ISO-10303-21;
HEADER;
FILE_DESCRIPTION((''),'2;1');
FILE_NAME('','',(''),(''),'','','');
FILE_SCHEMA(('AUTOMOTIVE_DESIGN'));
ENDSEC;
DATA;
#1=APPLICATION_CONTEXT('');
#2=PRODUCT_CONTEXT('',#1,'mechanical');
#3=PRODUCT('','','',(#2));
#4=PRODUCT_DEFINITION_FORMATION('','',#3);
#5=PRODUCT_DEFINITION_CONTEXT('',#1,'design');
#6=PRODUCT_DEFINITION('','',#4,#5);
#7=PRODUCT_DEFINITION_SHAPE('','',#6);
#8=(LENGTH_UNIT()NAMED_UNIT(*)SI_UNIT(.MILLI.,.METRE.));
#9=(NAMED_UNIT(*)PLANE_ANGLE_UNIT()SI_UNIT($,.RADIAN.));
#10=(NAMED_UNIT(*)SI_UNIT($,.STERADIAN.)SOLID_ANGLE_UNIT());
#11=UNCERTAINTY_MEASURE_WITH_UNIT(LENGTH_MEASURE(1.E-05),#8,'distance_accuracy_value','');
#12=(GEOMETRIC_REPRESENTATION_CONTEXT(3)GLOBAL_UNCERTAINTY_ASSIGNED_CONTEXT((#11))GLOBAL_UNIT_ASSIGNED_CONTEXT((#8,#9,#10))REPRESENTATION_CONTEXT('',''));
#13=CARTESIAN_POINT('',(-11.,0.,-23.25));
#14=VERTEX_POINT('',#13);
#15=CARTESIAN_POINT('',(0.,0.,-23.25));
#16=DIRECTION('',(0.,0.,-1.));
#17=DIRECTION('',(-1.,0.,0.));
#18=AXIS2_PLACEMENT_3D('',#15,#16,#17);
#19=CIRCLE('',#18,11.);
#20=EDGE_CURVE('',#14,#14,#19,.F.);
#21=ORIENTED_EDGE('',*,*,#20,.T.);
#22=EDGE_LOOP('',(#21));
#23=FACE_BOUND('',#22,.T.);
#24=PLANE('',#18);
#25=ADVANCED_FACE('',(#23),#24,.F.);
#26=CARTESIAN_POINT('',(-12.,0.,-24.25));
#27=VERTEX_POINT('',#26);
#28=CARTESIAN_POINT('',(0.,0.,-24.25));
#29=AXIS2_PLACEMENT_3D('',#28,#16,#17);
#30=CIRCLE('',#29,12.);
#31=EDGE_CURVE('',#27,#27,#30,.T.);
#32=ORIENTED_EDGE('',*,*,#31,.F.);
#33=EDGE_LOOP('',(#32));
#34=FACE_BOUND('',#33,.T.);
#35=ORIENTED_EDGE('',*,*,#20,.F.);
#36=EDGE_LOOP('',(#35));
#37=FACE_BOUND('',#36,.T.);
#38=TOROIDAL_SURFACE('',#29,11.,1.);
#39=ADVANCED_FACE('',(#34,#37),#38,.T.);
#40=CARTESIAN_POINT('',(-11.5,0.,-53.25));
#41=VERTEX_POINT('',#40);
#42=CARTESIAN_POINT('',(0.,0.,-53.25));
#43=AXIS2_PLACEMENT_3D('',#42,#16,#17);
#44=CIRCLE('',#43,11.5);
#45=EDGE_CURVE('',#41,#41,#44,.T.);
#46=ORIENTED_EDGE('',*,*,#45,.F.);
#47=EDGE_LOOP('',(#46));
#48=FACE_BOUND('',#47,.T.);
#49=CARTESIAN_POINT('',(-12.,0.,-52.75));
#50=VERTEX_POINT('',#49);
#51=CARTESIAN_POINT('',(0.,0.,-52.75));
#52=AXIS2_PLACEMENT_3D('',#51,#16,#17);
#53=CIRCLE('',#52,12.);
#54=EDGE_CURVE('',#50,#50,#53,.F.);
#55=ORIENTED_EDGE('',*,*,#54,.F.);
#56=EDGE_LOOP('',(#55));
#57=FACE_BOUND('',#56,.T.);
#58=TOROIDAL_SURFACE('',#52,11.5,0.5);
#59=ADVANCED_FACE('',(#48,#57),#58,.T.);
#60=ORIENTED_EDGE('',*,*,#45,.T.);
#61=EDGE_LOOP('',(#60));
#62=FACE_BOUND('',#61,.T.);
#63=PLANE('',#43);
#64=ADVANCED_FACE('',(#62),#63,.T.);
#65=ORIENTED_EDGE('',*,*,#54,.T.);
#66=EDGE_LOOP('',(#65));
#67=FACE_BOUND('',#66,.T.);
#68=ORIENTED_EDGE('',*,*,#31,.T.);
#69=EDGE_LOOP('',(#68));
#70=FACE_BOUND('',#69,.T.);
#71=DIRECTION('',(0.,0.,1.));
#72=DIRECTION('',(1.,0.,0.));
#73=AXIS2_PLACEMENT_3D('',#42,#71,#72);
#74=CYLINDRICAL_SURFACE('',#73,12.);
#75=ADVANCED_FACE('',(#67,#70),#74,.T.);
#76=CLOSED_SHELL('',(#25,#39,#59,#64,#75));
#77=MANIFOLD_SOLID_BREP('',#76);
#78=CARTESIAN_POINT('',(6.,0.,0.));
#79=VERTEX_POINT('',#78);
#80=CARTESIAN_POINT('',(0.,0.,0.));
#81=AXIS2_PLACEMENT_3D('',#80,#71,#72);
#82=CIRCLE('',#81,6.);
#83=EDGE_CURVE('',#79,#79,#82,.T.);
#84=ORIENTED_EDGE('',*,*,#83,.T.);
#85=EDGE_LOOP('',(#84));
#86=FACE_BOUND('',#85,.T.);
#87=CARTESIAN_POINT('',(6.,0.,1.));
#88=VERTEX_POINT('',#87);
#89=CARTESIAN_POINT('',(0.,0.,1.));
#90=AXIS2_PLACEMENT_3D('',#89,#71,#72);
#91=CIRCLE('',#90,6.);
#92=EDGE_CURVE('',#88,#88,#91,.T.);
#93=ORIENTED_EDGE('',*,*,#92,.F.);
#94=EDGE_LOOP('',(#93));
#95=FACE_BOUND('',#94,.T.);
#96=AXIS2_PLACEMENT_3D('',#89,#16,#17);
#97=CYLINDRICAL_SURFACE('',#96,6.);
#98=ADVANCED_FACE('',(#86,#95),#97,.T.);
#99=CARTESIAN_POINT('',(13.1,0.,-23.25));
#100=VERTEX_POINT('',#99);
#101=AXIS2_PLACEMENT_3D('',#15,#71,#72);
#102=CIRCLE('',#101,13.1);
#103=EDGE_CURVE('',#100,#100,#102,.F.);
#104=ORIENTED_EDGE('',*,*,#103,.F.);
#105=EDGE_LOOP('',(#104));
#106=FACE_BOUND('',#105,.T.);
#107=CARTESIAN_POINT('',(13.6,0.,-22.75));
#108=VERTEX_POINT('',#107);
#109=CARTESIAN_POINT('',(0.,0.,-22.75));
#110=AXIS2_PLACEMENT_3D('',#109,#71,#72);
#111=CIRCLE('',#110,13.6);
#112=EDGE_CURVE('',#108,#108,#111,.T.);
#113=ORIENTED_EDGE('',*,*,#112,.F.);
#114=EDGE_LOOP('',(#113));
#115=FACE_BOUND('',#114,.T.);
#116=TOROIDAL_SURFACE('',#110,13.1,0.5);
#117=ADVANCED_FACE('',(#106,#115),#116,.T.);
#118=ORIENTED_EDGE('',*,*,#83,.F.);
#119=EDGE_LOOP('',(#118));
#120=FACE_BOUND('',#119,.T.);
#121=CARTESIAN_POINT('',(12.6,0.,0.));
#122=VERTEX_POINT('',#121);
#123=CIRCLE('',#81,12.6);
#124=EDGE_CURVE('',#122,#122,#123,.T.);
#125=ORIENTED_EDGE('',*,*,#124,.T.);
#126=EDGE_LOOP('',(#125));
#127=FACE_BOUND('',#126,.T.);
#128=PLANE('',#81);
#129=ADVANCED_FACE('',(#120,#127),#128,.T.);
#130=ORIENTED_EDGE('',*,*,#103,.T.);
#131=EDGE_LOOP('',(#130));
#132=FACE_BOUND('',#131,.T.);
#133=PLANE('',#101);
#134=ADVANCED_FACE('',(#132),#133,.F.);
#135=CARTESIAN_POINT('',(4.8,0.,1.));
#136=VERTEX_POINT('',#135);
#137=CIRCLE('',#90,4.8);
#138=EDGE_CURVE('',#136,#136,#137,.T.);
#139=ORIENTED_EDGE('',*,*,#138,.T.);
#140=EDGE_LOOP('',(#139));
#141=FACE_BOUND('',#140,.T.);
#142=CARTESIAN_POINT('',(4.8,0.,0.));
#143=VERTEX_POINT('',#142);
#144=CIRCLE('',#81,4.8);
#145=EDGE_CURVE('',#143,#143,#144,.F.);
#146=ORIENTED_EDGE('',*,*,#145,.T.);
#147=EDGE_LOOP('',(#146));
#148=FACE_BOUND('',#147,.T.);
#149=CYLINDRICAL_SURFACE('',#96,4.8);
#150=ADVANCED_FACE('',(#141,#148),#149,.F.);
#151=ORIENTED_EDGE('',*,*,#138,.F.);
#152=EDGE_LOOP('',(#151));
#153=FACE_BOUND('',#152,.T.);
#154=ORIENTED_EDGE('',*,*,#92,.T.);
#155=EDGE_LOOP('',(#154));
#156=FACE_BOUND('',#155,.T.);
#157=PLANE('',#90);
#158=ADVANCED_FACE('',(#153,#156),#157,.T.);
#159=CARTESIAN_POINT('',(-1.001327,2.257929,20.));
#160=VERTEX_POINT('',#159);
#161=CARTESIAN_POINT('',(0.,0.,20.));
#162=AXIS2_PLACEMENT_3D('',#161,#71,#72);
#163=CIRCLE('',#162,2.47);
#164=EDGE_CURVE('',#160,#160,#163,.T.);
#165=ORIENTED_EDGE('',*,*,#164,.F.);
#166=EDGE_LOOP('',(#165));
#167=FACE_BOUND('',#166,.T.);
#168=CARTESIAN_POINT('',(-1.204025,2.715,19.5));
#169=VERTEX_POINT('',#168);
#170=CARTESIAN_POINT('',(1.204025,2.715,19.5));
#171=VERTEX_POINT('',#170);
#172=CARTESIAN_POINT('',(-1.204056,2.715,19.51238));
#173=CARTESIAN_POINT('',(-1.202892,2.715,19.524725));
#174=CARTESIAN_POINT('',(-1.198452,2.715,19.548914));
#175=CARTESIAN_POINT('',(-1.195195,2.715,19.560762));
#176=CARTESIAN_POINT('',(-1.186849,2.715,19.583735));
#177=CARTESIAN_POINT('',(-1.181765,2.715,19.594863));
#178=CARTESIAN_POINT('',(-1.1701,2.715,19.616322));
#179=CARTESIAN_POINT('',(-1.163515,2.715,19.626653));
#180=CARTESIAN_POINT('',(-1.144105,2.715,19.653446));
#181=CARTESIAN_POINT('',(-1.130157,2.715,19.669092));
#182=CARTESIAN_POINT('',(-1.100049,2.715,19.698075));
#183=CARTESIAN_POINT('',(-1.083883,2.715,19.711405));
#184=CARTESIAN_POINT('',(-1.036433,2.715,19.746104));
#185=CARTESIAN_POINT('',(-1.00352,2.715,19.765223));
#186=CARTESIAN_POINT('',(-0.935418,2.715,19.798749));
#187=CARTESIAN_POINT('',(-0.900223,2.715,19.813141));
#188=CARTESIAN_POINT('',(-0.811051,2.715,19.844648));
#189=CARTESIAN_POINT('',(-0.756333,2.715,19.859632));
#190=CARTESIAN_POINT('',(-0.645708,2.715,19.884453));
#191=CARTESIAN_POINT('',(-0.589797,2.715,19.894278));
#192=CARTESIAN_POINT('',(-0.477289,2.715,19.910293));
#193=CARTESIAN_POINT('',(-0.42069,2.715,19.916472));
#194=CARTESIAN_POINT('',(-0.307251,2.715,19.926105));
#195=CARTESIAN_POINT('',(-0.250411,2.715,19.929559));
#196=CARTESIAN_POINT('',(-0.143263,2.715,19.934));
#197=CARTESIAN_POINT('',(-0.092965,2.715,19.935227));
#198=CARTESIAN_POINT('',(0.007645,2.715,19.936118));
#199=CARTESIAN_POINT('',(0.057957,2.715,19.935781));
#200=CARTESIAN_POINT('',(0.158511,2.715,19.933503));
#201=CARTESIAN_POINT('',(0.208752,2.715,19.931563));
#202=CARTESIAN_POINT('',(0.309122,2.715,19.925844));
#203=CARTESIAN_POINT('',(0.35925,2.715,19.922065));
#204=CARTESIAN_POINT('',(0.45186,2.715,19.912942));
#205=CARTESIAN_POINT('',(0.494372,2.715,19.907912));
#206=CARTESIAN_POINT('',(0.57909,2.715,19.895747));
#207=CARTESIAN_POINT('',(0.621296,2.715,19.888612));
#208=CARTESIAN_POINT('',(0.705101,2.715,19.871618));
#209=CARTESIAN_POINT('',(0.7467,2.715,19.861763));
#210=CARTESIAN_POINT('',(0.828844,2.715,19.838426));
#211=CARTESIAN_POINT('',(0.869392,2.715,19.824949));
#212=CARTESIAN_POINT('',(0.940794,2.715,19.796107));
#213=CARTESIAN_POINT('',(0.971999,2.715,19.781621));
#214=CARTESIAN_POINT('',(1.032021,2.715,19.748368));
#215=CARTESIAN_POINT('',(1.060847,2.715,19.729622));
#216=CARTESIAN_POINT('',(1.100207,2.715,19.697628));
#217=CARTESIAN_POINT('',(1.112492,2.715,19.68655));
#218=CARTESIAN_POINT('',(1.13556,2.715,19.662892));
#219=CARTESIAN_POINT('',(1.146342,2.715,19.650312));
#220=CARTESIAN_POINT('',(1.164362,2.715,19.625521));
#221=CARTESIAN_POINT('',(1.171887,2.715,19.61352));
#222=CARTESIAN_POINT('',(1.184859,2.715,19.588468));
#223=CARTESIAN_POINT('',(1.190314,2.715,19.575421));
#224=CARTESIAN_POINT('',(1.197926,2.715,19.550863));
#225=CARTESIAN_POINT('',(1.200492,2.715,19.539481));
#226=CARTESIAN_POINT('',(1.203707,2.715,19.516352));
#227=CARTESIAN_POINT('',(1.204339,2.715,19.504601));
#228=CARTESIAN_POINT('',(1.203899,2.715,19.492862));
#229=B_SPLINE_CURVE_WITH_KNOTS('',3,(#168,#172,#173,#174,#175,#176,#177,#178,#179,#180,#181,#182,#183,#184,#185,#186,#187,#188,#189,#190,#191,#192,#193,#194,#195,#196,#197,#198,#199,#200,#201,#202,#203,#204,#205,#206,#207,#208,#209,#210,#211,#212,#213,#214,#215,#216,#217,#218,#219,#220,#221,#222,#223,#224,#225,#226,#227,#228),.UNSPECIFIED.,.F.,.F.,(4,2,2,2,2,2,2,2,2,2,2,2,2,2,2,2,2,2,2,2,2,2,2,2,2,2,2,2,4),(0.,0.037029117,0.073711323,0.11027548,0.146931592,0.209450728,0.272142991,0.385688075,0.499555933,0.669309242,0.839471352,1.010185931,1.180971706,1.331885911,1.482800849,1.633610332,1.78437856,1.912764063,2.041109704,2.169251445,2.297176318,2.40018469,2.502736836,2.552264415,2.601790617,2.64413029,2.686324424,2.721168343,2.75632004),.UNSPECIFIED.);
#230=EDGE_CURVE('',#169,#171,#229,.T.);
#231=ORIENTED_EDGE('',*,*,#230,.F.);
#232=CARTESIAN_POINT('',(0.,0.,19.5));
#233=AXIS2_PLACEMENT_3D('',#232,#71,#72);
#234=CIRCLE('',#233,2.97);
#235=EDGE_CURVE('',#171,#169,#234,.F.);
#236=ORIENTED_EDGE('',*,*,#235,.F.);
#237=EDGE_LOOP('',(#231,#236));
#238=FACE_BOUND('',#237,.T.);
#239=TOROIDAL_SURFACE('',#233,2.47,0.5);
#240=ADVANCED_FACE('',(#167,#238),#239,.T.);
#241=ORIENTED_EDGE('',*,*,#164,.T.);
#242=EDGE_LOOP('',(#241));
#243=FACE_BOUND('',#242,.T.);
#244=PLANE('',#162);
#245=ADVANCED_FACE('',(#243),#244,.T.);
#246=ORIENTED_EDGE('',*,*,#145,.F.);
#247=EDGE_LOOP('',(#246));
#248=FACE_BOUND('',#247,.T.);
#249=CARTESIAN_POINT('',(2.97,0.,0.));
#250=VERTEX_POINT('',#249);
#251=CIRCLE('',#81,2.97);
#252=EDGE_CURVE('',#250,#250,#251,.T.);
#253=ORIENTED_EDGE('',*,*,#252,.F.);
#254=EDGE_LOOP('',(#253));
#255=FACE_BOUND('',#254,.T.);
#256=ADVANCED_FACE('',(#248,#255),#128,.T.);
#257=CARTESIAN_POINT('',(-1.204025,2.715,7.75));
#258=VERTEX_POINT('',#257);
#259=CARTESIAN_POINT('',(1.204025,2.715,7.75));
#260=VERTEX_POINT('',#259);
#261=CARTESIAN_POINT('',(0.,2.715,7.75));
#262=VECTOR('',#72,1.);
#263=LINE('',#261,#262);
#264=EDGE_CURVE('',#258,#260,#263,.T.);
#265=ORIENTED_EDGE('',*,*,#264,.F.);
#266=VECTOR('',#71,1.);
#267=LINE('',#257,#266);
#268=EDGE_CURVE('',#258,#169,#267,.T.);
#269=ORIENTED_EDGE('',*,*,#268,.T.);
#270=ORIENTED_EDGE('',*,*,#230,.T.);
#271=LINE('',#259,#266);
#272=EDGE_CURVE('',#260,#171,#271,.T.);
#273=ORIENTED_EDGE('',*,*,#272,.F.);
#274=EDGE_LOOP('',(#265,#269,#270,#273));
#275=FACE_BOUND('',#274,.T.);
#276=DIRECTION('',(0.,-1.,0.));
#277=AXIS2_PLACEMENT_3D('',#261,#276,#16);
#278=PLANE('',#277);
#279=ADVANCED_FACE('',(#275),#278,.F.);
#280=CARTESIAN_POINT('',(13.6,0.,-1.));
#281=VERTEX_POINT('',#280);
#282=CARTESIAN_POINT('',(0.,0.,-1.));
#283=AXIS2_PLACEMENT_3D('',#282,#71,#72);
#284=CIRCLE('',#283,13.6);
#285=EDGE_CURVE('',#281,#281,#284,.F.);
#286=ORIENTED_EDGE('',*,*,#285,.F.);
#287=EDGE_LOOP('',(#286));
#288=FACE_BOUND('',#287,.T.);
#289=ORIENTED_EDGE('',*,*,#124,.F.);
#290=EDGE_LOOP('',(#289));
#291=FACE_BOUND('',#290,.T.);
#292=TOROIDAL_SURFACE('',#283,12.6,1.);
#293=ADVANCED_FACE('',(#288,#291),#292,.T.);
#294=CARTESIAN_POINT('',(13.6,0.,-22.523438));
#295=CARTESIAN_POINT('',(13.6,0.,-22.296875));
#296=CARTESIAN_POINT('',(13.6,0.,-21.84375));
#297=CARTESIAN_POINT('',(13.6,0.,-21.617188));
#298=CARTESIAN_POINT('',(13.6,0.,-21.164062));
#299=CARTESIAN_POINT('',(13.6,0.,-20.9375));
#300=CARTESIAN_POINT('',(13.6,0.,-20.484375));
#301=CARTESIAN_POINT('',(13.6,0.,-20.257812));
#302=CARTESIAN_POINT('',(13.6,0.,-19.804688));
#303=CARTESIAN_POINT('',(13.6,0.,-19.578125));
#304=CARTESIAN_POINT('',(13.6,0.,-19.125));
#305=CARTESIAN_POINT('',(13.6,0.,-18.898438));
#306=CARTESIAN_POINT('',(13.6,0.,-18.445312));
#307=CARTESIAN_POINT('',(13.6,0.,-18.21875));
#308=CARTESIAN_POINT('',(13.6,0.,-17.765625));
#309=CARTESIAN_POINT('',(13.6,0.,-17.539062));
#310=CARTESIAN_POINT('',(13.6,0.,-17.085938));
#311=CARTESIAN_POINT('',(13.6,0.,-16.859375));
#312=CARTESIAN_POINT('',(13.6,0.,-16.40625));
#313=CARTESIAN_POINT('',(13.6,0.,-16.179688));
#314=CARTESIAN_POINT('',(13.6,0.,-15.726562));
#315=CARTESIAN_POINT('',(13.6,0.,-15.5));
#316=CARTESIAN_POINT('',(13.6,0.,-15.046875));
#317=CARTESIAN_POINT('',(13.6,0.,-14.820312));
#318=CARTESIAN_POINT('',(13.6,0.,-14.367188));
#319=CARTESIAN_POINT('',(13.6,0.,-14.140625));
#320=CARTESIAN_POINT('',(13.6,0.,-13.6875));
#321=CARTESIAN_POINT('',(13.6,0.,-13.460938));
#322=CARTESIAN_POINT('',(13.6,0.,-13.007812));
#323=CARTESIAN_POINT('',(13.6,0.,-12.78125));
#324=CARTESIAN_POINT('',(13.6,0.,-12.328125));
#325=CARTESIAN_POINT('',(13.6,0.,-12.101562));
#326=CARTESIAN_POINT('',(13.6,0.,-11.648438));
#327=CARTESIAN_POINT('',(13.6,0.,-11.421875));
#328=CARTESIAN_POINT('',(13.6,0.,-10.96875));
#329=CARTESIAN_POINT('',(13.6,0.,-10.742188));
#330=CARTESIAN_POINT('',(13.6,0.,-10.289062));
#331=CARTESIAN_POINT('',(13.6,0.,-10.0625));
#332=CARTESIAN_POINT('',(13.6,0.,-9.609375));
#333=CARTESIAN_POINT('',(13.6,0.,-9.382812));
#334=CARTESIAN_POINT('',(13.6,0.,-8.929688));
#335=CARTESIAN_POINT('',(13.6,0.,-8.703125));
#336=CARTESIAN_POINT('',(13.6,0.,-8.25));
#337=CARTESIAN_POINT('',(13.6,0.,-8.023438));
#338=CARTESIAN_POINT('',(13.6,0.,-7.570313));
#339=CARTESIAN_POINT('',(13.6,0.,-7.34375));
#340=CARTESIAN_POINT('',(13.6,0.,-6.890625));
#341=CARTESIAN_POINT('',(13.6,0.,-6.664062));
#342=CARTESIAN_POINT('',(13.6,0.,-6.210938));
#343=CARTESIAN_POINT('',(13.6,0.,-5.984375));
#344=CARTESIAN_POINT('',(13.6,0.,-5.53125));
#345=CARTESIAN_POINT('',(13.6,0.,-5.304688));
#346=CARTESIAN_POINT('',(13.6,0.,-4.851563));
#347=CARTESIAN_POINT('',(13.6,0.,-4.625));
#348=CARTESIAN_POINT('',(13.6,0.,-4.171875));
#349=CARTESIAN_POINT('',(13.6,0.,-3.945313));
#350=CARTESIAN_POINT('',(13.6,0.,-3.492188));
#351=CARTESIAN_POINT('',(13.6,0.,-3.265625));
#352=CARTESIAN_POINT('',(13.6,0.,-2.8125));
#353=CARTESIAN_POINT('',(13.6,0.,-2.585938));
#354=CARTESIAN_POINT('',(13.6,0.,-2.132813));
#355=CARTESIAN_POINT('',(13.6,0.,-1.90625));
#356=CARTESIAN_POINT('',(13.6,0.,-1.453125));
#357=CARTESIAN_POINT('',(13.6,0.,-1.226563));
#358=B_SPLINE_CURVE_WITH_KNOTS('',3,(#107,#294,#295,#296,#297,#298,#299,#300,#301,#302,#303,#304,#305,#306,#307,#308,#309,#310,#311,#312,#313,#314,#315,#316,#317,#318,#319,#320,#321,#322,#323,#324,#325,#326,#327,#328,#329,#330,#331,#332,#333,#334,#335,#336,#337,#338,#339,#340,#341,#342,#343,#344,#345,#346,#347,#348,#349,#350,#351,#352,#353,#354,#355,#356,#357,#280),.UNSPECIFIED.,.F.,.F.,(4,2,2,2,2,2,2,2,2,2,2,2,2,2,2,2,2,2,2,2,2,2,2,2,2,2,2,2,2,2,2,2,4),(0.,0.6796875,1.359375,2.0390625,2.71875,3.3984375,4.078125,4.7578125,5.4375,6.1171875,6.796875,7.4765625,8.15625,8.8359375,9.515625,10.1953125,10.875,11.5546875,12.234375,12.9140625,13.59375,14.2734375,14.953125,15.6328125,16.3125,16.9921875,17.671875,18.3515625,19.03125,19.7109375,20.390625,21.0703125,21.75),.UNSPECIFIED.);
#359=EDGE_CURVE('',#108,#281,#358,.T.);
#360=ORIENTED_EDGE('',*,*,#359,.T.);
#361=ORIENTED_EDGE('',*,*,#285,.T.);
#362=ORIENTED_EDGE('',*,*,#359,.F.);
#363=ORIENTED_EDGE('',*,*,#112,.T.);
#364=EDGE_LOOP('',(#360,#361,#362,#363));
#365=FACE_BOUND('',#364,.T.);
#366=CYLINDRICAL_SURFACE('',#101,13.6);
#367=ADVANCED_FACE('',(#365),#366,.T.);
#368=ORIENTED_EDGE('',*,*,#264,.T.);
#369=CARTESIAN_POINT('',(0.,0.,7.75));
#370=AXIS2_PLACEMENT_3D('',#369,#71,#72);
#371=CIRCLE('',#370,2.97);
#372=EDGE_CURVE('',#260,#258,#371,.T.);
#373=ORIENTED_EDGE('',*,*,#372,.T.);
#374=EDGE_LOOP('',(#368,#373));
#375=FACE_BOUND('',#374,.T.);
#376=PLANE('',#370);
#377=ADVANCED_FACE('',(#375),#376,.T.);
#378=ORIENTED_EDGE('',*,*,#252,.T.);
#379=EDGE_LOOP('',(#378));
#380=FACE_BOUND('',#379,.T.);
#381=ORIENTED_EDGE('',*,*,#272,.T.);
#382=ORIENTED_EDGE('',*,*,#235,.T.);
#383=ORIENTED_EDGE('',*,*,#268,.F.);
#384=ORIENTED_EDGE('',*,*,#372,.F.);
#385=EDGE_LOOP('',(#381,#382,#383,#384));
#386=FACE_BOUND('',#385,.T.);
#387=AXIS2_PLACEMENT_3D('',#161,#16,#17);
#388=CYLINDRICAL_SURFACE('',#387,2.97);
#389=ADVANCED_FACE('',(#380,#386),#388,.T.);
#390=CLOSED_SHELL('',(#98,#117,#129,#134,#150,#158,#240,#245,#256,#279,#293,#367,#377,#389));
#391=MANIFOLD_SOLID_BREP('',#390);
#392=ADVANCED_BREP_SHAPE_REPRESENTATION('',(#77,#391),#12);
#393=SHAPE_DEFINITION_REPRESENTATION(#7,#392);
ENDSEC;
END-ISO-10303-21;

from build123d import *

# Parameters (mm, degrees)
SKETCH1_R               = 13.6
BOSS_EXTRUDE1_DEPTH     = 23.25
SKETCH2_R               = 12
BOSS_EXTRUDE2_DEPTH     = 30
FILLET1_R               = 1
FILLET2_R               = 1
SKETCH3_R               = 6
SKETCH3_R_2             = 4.8
BOSS_EXTRUDE3_DEPTH     = 1
SKETCH4_R               = 2.97
BOSS_EXTRUDE4_DEPTH     = 20
CUT_EXTRUDE1_DEPTH      = 76.7329684
CUT_EXTRUDE1_DEPTH_BACK = 12.25
FILLET3_R               = 0.5
FILLET4_R               = 0.5
FILLET5_R               = 0.5


with BuildPart() as part:
    # Sketch1 → Boss-Extrude1 (new body)
    with BuildSketch(Plane.XY):
        Circle(SKETCH1_R)
    extrude(amount=-BOSS_EXTRUDE1_DEPTH)

    # Fillet2
    fillet2_edges = [part.edges().sort_by_distance(p)[0] for p in [
        (-13.6, 0, 0),
    ]]
    fillet(fillet2_edges, radius=FILLET2_R)

    # Sketch3 → Boss-Extrude3 (add)
    with BuildSketch(Plane.XY):
        Circle(SKETCH3_R)
        Circle(SKETCH3_R_2, mode=Mode.SUBTRACT)
    extrude(amount=BOSS_EXTRUDE3_DEPTH)

    # Sketch4 → Boss-Extrude4 (add)
    with BuildSketch(Plane.XY):
        Circle(SKETCH4_R)
    extrude(amount=BOSS_EXTRUDE4_DEPTH)

    # Sketch5 → Cut-Extrude1 (cut, two sides: drawn at the far end of the back side and taken through both)
    with BuildSketch(Plane.XY.offset(20).offset(-CUT_EXTRUDE1_DEPTH_BACK)):
        Polygon((-55.264817477, 2.715), (-1.204024501, 2.715), (1.204024501, 2.715), (55.264817477, 2.715), (55.264817477, 110.83658595), (-55.264817477, 110.83658595), align=None)
    extrude(amount=CUT_EXTRUDE1_DEPTH + CUT_EXTRUDE1_DEPTH_BACK, mode=Mode.SUBTRACT)

    # Fillet3
    # the kernel refuses this fillet: 0.5 mm, written as the material it takes off along each edge
    with BuildSketch(Plane(origin=(0, 0, 20), x_dir=(0.004730320040790282, 0.9999888119735698, 0), z_dir=(0.9999888119735698, -0.004730320040790282, 0))) as fillet3_piece_1:
        with BuildLine():
            CenterArc((2.97 - FILLET3_R, -FILLET3_R), FILLET3_R, 0, 90)
            Line((2.97 - FILLET3_R, 0), (2.97, 0))
            Line((2.97, 0), (2.97, -FILLET3_R))
        make_face()
    revolve(axis=Axis((0, 0, 20), (0, 0, 1)), revolution_arc=270.271028385, mode=Mode.SUBTRACT)
    with BuildSketch(Plane(origin=(0, 0, 20), x_dir=(1, 0, 0), z_dir=(0, -1, 0))) as fillet3_piece_2:
        with BuildLine():
            CenterArc((2.97 - FILLET3_R, -FILLET3_R), FILLET3_R, 0, 90)
            Line((2.97 - FILLET3_R, 0), (2.97, 0))
            Line((2.97, 0), (2.97, -FILLET3_R))
        make_face()
    revolve(axis=Axis((0, 0, 20), (0, 0, 1)), revolution_arc=90.203696588, mode=Mode.SUBTRACT)

    # Fillet4
    fillet4_edges = [part.edges().sort_by_distance(p)[0] for p in [
        (-13.6, 0, -23.25),
    ]]
    fillet(fillet4_edges, radius=FILLET4_R)


with BuildPart() as body_2:
    # Sketch2 → Boss-Extrude2 (new body)
    with BuildSketch(Plane(origin=(0, 0, -23.25), x_dir=(-1, 0, 0), z_dir=(0, 0, -1))):
        Circle(SKETCH2_R)
    extrude(amount=BOSS_EXTRUDE2_DEPTH)

    # Fillet1
    fillet1_edges = [body_2.edges().sort_by_distance(p)[0] for p in [
        (12, 0, -23.25),
    ]]
    fillet(fillet1_edges, radius=FILLET1_R)

    # Fillet5
    fillet5_edges = [body_2.edges().sort_by_distance(p)[0] for p in [
        (12, 0, -53.25),
    ]]
    fillet(fillet5_edges, radius=FILLET5_R)


solid = Compound([part.part, body_2.part])
